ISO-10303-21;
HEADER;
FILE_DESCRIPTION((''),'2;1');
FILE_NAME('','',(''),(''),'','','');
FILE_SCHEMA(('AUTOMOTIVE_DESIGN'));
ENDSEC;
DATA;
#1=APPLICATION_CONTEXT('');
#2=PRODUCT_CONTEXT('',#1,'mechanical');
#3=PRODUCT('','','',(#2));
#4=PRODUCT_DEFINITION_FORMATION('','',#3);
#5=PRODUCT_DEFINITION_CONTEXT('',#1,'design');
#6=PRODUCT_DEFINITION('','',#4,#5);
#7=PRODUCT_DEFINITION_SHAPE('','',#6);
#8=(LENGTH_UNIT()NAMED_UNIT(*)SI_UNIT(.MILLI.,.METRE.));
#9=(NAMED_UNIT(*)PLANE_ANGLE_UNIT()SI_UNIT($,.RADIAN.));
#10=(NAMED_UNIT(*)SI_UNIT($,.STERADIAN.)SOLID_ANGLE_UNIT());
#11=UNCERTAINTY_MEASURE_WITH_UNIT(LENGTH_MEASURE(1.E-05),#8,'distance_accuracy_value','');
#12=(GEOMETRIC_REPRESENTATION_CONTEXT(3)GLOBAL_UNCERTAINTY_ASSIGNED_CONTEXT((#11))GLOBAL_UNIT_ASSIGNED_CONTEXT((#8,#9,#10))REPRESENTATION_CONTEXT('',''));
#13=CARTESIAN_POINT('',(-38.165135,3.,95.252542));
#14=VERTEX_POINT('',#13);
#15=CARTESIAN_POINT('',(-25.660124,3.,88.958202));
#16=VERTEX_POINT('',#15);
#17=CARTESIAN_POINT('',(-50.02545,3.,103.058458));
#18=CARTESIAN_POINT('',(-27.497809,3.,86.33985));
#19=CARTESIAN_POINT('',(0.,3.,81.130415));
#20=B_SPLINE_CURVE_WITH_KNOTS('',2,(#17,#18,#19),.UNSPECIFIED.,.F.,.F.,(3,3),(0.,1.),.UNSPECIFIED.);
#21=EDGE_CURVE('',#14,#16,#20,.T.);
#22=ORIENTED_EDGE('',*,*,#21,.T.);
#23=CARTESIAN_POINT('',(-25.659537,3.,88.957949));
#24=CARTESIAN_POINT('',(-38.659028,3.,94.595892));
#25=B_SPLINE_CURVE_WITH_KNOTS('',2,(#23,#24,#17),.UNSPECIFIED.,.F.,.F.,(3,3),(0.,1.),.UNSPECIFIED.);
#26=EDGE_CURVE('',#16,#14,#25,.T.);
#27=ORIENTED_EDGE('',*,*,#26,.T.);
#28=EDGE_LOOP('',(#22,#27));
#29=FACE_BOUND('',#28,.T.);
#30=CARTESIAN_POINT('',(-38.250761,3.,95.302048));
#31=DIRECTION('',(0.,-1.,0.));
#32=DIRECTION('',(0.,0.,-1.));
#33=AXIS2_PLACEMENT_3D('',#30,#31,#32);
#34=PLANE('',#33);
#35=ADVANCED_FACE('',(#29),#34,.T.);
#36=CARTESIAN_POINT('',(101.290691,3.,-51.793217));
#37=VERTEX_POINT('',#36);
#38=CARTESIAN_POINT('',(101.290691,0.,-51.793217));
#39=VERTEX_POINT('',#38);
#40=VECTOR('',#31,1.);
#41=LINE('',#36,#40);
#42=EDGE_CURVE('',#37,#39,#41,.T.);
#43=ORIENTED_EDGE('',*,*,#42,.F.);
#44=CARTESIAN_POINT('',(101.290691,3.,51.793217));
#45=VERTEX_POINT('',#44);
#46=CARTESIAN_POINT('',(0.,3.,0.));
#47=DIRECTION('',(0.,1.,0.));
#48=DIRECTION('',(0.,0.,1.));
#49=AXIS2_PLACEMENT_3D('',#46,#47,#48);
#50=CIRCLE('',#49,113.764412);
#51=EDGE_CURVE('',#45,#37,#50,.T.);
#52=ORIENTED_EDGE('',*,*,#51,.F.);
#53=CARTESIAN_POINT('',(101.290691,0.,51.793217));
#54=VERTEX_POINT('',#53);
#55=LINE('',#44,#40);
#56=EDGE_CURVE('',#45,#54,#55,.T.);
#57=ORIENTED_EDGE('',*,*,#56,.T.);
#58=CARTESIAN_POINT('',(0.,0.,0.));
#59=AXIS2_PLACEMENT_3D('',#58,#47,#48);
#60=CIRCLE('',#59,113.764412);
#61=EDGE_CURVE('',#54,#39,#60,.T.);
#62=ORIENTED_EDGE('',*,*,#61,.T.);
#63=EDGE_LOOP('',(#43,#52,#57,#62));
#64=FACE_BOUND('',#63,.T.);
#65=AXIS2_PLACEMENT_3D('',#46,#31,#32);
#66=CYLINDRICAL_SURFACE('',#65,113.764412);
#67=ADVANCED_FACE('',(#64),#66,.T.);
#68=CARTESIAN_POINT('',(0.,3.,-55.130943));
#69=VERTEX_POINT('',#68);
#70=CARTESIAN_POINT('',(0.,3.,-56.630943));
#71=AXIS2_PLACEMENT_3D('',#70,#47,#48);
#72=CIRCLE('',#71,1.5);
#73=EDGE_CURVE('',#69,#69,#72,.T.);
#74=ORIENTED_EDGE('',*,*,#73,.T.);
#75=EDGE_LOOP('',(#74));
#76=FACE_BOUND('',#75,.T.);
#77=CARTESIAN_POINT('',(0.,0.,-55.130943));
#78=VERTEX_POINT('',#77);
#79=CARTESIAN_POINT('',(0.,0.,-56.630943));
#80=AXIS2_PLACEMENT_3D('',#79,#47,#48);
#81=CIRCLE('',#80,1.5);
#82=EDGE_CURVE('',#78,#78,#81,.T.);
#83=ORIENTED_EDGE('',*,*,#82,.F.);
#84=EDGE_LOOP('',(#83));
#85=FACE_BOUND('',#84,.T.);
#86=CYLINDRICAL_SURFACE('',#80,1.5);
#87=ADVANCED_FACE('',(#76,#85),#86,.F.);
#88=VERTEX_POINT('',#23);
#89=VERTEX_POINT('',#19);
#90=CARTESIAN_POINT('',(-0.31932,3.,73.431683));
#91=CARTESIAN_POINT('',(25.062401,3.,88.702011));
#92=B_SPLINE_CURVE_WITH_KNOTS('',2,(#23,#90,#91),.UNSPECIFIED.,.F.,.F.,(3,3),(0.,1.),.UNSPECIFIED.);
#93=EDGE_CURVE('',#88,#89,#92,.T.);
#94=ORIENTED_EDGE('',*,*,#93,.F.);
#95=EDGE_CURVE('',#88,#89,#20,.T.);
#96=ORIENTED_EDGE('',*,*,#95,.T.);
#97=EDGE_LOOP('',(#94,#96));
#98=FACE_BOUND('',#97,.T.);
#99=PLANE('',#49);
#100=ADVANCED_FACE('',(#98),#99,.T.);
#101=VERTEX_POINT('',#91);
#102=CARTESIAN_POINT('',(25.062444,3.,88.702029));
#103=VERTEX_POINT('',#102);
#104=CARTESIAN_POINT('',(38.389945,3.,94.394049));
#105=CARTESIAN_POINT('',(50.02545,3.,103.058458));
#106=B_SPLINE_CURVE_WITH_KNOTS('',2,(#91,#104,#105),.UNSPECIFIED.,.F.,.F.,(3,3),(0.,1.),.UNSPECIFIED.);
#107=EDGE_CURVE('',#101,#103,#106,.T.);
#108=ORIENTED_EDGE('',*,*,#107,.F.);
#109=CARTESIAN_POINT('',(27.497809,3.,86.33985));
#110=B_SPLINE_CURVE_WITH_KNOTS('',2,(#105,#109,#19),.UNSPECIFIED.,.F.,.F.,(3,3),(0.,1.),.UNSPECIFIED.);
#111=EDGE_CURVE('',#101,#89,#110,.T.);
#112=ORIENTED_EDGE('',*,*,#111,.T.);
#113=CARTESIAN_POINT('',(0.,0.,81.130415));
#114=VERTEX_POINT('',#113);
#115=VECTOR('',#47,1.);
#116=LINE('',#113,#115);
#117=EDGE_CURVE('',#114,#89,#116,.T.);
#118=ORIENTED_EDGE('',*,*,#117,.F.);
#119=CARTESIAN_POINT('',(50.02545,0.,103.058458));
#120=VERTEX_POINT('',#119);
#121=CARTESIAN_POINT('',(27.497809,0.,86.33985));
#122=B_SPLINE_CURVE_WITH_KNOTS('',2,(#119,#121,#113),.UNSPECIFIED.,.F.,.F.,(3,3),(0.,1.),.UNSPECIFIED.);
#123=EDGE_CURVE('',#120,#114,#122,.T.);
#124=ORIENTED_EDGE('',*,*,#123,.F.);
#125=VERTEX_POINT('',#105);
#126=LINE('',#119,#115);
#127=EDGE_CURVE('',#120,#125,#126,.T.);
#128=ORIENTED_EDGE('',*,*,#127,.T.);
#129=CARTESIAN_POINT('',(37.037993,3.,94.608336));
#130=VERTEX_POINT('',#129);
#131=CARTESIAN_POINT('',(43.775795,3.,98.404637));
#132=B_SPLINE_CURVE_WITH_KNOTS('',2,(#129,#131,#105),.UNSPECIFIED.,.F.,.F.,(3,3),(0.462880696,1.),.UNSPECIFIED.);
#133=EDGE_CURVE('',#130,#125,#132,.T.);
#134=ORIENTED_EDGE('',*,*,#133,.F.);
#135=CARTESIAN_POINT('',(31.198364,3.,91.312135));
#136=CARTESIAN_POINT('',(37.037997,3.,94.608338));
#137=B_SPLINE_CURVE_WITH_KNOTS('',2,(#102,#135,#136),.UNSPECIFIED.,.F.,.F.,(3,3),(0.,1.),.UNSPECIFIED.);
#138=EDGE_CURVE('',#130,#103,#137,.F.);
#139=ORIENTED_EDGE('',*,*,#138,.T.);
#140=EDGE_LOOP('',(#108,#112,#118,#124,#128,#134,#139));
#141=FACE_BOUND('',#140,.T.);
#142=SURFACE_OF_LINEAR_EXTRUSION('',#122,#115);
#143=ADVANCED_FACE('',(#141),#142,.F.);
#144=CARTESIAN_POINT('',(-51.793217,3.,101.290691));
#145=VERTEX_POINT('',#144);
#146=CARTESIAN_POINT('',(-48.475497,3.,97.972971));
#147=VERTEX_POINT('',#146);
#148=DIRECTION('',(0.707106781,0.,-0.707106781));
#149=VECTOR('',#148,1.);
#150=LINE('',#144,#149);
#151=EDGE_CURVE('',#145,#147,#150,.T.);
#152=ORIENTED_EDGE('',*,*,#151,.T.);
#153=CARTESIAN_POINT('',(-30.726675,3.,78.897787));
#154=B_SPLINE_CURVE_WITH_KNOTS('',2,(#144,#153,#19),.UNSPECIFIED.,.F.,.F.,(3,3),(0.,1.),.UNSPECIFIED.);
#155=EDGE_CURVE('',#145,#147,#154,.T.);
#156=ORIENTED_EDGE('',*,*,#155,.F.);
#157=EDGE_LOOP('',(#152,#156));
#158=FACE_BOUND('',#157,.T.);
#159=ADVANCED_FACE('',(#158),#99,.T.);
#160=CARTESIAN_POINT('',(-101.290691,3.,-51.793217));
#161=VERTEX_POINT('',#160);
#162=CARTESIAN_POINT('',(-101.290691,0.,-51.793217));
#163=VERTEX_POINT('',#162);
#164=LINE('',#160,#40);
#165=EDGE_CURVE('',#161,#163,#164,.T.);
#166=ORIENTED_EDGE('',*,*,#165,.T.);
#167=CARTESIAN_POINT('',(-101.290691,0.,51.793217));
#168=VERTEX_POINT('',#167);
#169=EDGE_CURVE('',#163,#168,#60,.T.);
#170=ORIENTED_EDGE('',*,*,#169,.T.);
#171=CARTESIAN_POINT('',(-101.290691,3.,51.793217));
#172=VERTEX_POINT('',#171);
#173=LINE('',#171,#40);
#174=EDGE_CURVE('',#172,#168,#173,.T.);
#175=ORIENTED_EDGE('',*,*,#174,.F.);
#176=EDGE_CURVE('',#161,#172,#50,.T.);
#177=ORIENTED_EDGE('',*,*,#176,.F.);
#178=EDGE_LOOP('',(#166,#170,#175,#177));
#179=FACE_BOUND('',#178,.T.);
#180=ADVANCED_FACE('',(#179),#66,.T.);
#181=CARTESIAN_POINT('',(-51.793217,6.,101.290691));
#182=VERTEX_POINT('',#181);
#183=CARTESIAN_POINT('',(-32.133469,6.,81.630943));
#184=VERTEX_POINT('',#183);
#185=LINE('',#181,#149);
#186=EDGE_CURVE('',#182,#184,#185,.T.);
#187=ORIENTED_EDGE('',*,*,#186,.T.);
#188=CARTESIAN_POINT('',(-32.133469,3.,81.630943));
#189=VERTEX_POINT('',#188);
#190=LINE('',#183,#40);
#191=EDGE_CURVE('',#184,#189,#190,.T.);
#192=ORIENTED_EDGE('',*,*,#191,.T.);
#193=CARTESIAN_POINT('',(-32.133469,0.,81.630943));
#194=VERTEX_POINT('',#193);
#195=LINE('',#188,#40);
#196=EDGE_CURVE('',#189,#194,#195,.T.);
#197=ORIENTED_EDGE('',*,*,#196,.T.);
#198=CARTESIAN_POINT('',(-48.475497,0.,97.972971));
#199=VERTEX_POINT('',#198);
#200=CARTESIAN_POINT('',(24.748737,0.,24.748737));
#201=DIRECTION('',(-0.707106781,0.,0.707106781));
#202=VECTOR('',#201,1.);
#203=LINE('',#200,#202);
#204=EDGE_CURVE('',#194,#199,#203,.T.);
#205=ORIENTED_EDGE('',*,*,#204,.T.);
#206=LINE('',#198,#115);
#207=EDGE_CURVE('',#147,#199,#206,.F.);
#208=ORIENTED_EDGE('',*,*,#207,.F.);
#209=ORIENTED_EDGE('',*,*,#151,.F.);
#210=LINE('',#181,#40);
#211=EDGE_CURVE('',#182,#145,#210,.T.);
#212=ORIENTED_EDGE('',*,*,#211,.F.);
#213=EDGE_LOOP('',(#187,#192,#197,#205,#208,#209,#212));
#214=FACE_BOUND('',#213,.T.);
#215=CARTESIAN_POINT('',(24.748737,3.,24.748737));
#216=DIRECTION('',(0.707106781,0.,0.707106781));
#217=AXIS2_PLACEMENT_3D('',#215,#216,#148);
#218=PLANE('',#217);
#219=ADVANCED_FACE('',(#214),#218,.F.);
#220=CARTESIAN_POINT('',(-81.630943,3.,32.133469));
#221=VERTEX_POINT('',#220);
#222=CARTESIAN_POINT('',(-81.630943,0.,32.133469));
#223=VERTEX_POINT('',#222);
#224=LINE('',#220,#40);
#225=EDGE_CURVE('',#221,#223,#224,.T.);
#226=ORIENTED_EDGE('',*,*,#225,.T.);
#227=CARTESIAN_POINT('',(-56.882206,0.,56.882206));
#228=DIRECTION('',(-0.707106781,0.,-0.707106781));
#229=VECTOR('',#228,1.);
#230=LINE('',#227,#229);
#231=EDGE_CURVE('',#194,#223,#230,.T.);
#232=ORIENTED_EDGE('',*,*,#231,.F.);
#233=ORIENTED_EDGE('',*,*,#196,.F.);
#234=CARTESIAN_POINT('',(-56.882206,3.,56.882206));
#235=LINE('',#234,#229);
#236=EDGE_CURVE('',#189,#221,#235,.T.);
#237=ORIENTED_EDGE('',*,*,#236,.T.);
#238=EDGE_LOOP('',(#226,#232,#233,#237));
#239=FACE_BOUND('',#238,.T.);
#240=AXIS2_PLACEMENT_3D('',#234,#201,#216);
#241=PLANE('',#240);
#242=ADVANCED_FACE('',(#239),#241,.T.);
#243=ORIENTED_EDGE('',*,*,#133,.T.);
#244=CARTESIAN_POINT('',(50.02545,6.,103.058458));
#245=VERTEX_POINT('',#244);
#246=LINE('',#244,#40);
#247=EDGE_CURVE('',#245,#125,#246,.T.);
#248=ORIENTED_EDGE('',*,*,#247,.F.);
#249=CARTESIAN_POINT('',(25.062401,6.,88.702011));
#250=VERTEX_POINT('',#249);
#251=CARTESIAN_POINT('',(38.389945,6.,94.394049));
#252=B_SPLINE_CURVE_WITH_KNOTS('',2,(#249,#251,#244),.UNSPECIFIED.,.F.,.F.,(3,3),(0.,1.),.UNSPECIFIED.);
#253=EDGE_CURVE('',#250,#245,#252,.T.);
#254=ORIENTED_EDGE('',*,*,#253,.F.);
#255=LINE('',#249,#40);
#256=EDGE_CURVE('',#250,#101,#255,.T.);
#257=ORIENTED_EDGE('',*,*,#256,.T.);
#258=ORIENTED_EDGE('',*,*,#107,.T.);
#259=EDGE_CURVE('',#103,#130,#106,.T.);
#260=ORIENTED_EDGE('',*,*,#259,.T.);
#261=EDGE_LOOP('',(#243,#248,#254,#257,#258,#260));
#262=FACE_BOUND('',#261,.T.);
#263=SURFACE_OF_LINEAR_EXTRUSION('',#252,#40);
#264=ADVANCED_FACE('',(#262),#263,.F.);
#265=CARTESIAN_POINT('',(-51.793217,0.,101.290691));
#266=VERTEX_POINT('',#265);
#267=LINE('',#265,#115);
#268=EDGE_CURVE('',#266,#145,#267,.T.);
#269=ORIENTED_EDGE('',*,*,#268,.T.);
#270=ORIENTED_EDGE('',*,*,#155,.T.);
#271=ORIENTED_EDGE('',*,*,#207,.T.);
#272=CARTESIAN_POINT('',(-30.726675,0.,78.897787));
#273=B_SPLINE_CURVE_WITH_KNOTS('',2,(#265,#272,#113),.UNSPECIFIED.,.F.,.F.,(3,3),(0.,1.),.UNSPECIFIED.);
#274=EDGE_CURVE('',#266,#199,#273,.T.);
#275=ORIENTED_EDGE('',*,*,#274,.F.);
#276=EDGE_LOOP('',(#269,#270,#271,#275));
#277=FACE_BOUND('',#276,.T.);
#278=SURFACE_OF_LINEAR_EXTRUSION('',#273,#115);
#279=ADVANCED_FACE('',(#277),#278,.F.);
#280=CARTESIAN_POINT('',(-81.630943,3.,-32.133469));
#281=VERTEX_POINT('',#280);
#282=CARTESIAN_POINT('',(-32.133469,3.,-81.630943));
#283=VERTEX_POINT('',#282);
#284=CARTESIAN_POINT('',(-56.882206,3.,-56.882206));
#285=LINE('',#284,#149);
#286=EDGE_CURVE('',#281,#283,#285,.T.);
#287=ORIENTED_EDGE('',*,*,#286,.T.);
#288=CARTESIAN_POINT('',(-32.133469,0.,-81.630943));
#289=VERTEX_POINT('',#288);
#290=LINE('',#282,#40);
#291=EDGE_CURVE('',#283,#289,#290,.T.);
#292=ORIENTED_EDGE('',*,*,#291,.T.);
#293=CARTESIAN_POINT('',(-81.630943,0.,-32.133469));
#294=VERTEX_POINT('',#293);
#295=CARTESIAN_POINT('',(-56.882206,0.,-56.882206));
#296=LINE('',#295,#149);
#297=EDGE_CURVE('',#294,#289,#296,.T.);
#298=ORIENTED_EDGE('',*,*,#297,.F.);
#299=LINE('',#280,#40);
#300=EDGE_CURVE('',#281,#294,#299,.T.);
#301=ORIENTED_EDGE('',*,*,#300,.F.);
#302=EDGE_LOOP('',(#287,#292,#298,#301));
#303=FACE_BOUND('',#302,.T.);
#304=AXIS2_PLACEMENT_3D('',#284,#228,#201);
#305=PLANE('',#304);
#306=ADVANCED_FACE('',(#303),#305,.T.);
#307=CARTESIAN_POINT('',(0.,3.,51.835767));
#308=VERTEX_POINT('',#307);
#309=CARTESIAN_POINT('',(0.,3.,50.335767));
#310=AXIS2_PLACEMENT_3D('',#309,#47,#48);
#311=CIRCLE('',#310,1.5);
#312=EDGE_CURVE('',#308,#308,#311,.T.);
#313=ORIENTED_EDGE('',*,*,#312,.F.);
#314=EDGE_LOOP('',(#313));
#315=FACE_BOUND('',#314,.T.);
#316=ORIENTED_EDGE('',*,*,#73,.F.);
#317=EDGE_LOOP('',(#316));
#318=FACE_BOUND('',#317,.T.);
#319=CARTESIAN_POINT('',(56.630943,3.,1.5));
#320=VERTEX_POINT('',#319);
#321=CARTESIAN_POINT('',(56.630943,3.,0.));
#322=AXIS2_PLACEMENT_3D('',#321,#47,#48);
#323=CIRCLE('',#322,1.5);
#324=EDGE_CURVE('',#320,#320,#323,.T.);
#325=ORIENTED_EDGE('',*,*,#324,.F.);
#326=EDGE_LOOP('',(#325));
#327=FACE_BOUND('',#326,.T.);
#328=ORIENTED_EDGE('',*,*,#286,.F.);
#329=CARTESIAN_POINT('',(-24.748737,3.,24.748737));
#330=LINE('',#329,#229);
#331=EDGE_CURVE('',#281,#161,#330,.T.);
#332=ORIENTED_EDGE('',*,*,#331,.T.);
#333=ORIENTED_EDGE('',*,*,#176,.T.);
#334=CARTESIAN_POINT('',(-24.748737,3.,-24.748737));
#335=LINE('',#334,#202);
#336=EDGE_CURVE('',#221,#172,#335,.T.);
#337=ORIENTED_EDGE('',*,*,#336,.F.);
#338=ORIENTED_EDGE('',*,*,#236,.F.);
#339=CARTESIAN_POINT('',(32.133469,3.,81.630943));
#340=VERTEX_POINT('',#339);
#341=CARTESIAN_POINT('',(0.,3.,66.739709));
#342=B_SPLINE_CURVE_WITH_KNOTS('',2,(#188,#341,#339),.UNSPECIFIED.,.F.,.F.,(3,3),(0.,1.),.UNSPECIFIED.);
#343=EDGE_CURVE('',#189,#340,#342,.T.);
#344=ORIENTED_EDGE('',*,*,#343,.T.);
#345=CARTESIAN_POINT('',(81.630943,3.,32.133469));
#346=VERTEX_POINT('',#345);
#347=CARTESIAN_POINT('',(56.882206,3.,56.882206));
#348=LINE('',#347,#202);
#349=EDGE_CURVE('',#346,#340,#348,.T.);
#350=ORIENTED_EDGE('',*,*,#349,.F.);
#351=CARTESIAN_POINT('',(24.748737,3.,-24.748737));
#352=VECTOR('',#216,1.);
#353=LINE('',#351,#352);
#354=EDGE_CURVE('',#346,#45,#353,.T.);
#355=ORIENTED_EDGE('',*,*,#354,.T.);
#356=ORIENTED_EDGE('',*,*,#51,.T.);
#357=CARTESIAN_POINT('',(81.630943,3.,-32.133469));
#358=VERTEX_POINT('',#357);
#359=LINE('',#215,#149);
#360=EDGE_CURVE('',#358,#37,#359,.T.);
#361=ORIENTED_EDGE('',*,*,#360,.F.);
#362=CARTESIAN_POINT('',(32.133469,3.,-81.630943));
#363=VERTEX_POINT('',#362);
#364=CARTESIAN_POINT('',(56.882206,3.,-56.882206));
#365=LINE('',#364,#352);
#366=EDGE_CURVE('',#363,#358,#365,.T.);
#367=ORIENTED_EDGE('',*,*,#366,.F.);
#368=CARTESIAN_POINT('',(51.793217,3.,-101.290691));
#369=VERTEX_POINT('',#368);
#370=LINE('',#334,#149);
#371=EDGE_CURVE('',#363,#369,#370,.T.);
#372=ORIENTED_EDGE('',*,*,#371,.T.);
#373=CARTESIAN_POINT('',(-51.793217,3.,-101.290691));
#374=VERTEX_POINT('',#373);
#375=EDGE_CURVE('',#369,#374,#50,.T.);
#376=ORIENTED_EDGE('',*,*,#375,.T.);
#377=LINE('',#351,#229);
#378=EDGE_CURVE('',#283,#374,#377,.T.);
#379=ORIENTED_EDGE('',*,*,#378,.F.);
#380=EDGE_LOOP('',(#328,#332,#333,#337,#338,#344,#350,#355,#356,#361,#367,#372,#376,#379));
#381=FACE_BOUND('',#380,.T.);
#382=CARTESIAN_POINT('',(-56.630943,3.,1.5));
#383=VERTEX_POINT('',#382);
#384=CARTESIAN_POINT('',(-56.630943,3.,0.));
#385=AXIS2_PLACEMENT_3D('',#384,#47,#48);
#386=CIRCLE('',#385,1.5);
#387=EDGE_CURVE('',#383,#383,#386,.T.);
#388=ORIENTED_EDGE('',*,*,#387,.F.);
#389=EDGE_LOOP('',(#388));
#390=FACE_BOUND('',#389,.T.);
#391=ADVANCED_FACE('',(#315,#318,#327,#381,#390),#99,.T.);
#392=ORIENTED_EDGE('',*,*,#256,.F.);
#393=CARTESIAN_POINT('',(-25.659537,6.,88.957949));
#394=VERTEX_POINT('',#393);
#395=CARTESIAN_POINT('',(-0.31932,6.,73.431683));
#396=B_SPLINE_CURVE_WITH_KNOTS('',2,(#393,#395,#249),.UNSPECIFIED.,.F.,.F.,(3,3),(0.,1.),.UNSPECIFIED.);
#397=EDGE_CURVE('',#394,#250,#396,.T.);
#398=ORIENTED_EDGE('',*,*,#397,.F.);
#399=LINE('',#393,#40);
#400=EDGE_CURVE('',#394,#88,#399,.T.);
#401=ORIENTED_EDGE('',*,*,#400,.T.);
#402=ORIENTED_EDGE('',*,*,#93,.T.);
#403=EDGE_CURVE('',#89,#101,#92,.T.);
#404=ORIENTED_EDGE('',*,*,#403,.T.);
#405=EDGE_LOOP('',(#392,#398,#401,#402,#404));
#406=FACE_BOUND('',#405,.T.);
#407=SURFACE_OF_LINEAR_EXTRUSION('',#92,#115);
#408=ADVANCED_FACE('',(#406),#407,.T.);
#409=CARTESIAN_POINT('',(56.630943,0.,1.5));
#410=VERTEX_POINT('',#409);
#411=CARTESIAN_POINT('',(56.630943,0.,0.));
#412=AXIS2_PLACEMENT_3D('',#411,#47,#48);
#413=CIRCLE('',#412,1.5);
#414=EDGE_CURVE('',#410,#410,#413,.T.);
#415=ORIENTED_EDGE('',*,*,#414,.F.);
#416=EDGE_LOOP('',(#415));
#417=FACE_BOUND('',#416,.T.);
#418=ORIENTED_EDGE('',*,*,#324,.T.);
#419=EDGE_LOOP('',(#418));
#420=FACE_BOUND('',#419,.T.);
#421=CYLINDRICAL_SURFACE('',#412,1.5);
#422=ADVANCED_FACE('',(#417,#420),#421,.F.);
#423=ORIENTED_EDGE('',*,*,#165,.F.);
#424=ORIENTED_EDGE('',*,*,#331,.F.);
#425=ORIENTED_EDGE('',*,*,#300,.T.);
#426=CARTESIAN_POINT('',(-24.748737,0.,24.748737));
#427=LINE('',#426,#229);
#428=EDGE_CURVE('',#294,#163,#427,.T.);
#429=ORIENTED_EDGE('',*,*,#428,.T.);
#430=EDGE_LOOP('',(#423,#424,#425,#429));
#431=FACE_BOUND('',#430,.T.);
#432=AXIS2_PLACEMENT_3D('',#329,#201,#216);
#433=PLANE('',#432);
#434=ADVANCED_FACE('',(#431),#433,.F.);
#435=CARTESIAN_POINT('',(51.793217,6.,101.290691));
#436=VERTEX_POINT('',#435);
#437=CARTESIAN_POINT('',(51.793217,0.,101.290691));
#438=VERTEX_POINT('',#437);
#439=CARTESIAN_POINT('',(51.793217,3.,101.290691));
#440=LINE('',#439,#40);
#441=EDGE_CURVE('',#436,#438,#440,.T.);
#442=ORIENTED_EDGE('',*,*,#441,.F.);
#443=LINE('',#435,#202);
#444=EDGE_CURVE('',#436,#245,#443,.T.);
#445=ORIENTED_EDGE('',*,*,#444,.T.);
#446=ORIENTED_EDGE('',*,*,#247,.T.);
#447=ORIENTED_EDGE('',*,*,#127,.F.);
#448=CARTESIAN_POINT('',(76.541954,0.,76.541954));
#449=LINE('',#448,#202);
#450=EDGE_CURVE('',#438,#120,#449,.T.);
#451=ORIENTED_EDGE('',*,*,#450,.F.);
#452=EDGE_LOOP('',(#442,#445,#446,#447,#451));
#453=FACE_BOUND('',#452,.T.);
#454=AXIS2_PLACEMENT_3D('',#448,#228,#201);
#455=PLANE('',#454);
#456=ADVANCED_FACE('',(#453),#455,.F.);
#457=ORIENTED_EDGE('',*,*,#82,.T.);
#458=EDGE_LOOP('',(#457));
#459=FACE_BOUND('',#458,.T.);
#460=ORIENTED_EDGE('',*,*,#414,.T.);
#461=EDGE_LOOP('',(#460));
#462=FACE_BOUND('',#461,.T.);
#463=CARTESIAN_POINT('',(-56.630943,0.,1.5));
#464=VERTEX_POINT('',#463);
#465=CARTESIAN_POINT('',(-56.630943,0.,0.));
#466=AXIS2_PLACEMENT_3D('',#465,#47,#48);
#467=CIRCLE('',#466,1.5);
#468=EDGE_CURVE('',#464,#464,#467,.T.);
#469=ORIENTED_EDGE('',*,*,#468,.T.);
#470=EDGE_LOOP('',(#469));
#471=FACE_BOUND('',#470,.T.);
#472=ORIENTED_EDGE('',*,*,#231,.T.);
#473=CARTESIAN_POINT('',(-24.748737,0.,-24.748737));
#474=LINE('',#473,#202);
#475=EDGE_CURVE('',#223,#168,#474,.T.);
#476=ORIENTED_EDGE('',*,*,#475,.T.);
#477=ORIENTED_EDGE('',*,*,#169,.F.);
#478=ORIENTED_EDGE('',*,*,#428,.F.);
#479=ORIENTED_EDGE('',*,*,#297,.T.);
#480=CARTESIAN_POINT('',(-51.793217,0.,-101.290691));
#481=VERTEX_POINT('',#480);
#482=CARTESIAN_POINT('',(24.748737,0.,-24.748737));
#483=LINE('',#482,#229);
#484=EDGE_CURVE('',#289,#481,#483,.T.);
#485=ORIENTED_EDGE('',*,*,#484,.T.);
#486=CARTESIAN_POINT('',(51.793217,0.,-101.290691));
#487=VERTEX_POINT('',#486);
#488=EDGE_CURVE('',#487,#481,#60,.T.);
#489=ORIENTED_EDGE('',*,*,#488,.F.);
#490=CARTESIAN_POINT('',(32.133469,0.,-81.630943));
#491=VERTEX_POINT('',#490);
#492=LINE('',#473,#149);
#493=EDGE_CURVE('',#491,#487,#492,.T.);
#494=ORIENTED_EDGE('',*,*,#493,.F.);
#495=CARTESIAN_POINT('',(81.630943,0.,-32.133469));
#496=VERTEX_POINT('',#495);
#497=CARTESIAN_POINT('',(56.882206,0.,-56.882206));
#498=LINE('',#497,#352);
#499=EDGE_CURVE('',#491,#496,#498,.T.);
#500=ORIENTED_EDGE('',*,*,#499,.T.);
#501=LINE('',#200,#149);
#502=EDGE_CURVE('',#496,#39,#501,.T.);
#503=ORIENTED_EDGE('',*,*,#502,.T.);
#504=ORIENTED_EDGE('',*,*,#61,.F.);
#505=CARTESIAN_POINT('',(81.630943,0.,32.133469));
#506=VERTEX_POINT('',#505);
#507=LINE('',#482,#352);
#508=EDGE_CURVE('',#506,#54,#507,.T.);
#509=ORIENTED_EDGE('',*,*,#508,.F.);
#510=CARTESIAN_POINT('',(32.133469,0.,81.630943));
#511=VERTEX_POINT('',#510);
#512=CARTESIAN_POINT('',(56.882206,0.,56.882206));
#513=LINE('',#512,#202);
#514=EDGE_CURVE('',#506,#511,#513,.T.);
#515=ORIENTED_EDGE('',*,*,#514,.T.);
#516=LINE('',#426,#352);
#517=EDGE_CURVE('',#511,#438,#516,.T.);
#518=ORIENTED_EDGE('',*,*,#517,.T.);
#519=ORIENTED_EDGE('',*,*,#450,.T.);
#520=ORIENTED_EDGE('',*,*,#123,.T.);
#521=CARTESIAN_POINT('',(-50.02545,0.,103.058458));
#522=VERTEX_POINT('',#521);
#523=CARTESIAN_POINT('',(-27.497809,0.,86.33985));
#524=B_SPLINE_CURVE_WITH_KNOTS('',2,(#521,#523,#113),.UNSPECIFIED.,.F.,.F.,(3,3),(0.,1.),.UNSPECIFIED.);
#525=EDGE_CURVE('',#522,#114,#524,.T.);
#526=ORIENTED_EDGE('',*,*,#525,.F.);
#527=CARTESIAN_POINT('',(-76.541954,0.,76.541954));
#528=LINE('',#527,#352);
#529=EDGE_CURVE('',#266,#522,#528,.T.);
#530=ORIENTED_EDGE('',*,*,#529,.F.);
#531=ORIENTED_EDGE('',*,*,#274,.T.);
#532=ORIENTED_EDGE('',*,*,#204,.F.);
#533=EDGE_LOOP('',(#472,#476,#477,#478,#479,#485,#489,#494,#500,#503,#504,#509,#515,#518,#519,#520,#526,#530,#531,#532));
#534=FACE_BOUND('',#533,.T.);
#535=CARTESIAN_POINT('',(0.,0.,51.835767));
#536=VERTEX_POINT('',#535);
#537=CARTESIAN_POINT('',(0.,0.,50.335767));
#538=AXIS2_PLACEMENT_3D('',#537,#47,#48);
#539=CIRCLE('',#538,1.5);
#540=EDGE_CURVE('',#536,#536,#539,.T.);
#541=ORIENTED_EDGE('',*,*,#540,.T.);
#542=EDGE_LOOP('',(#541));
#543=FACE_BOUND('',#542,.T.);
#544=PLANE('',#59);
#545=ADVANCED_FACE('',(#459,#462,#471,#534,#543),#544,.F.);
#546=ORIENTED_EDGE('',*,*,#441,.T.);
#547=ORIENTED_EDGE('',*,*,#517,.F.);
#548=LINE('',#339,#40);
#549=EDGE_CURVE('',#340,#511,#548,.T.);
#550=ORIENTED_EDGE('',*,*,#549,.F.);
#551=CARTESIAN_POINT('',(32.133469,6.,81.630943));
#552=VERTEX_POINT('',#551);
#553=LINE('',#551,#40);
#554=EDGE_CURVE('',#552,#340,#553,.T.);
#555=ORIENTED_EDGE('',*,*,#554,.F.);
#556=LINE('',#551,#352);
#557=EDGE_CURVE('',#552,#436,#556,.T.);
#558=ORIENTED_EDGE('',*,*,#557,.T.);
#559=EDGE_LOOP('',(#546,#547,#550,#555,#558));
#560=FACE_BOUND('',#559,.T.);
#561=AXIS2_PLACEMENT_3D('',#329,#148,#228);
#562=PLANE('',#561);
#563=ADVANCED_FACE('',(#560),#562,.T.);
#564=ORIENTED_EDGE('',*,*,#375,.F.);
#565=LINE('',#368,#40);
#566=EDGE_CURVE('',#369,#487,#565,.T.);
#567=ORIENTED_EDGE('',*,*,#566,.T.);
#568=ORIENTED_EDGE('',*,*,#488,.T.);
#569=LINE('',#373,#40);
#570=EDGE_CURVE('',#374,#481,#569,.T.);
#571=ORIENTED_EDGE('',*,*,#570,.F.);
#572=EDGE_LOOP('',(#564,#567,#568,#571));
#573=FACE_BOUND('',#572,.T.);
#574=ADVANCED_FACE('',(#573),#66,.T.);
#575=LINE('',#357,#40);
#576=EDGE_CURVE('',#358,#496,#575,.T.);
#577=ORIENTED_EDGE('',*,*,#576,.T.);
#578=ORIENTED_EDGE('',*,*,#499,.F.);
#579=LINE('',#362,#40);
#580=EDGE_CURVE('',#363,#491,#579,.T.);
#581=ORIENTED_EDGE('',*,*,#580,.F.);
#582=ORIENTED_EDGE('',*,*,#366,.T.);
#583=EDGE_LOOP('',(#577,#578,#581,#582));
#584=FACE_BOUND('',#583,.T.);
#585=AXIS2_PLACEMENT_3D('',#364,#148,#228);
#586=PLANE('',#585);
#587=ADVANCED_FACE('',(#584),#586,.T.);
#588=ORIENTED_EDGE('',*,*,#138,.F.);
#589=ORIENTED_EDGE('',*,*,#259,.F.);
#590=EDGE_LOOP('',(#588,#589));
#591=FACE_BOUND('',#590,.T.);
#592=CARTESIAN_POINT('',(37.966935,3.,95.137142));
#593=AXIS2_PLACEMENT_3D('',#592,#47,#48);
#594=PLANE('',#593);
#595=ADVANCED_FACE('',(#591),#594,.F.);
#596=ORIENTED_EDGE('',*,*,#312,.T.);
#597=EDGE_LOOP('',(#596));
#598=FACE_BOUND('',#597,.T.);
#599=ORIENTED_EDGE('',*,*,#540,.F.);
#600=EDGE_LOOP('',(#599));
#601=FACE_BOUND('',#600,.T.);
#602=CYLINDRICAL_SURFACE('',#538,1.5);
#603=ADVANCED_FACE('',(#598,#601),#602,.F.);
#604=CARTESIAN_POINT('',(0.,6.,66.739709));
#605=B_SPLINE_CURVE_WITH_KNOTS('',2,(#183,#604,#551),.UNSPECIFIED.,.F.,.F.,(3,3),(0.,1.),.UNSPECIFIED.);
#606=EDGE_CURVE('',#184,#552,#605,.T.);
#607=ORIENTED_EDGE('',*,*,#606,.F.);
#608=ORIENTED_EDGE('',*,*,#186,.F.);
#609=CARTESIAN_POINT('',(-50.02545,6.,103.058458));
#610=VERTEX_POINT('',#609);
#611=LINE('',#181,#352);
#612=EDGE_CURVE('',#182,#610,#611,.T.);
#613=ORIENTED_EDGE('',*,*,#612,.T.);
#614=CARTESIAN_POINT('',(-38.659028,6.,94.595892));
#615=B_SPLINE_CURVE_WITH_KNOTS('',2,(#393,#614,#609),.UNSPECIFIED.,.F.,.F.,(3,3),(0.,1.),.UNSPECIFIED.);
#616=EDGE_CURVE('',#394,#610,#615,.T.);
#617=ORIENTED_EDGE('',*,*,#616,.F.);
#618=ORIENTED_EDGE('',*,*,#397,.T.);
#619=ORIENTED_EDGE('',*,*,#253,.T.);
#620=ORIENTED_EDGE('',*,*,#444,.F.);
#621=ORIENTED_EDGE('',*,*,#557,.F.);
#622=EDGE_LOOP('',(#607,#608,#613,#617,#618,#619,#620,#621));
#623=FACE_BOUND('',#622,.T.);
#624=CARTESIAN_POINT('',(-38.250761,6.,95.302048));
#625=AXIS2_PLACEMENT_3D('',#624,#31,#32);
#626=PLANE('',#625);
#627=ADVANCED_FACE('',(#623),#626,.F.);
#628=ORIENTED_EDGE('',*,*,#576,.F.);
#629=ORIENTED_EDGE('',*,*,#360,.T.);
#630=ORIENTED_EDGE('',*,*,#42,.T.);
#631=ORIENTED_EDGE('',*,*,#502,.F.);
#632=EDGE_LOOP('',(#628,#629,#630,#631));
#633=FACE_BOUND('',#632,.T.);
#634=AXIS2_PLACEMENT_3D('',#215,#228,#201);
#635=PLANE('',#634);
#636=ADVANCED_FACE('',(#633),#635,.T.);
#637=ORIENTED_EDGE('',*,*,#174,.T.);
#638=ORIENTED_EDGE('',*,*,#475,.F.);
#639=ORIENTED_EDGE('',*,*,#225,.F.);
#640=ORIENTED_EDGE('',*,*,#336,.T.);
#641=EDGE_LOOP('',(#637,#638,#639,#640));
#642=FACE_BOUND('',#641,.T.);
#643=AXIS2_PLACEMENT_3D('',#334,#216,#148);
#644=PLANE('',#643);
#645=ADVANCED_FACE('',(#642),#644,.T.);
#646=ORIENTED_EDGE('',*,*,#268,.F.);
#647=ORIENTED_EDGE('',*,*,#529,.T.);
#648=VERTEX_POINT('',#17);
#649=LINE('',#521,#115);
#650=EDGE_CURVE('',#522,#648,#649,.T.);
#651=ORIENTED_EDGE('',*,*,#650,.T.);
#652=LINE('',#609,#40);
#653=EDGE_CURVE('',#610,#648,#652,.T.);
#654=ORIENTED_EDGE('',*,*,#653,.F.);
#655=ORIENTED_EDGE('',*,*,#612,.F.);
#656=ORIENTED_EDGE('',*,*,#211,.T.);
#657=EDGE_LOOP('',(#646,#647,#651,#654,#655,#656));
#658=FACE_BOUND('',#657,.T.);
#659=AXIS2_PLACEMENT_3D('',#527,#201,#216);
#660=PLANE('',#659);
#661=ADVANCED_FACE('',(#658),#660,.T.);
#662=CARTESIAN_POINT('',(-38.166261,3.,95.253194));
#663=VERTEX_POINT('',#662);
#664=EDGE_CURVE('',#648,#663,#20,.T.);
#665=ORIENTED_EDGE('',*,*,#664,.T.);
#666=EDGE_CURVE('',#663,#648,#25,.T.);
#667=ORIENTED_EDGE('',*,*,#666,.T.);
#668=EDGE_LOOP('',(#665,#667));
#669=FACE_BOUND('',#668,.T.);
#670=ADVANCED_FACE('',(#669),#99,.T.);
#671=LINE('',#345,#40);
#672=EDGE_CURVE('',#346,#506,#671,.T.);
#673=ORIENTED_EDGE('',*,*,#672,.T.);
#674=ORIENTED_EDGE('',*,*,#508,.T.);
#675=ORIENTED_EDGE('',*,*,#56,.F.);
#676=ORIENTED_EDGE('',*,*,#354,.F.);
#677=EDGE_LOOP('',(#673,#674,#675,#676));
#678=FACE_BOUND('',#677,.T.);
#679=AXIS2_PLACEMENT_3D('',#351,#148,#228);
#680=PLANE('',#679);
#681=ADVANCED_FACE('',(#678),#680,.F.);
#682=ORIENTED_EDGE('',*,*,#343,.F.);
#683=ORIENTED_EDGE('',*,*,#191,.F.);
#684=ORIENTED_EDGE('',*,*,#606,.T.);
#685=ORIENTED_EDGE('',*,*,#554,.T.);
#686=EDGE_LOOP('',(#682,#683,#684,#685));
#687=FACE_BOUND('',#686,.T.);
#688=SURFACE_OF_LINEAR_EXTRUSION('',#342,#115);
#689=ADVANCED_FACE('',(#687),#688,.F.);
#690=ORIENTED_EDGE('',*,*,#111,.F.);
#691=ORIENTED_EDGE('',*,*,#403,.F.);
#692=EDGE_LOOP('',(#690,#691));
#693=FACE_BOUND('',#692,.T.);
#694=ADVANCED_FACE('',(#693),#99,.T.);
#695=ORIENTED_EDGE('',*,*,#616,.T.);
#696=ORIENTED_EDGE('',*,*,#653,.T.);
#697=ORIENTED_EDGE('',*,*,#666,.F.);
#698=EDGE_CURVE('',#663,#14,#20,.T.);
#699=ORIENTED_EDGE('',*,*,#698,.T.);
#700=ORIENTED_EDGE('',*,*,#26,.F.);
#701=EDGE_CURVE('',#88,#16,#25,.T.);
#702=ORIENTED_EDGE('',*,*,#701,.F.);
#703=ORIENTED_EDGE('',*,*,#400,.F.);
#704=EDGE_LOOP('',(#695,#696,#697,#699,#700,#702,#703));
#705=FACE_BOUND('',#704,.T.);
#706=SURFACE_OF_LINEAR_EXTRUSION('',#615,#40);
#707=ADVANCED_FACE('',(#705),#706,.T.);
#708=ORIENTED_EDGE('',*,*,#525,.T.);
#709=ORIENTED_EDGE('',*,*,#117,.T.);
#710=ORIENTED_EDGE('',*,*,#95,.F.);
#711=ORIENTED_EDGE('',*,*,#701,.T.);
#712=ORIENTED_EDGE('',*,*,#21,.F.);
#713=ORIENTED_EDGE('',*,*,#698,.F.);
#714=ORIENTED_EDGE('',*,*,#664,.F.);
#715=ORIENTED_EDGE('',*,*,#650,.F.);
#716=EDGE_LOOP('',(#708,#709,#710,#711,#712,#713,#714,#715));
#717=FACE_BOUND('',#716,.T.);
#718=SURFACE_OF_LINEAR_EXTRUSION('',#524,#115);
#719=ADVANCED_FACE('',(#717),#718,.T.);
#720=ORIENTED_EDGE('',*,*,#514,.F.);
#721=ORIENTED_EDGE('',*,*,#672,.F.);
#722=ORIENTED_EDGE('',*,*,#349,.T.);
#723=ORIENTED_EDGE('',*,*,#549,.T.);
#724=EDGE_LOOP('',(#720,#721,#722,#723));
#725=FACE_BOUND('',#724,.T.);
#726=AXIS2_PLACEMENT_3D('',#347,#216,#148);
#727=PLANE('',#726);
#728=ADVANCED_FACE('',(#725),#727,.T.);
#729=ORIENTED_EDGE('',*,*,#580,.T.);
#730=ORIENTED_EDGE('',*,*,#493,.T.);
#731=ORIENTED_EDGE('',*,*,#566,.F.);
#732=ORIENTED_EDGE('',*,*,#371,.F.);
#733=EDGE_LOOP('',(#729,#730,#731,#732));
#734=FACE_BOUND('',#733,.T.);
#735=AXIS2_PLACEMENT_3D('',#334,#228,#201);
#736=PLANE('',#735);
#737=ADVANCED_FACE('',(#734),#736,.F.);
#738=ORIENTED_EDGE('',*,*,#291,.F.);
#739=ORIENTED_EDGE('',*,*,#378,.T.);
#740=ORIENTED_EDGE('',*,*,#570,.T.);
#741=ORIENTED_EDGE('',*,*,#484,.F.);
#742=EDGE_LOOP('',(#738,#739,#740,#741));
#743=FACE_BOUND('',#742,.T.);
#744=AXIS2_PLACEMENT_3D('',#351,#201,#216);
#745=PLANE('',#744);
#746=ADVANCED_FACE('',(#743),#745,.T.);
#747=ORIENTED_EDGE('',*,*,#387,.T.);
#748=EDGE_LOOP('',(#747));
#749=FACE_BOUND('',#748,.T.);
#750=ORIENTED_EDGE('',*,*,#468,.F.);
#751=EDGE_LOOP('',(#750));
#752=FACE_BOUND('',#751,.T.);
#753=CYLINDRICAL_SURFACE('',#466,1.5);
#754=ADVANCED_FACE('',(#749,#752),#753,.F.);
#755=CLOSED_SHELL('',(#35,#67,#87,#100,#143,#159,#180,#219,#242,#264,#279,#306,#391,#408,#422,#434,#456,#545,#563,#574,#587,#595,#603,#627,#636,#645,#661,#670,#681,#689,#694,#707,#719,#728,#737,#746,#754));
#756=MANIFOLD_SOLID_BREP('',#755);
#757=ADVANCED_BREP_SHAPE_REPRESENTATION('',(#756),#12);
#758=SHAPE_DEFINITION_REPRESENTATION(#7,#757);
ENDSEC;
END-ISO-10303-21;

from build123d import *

# Parameters (mm, degrees)
BOSS_EXTRUDE1_DEPTH  = 3
CUT_EXTRUDE2_START   = -3
CUT_EXTRUDE2_DEPTH   = 3
CUT_EXTRUDE3_DEPTH   = 3
BOSS_EXTRUDE22_START = -3
BOSS_EXTRUDE22_DEPTH = 3
BOSS_EXTRUDE23_DEPTH = 3
BOSS_EXTRUDE25_DEPTH = 3
SKETCH9_R            = 1.5
CUT_EXTRUDE7_DEPTH   = 3


# Read off the part's stored shape, not the designer's step: Boss-Extrude22
with BuildPart() as part:
    # Sketch1 → Boss-Extrude1 (new body)
    with BuildSketch(Plane(origin=(0, 0, 0), x_dir=(1, 0, 0), z_dir=(0, 1, 0))):
        with BuildLine():
            Line((-101.290691251, -51.793216568), (-81.630943295, -32.133468612))
            Line((-81.630943295, -32.133468612), (-113.764411907, 0))
            ThreePointArc((-113.764411907, 0), (-110.602028323, -26.637055906), (-101.290691251, -51.793216568))
        make_face()
        with BuildLine():
            ThreePointArc((-101.290691251, 51.793216568), (-110.602028323, 26.637055906), (-113.764411907, 0))
            Line((-113.764411907, 0), (-81.630943295, 32.133468612))
            Line((-81.630943295, 32.133468612), (-101.290691251, 51.793216568))
        make_face()
        with BuildLine():
            Line((-51.793216568, 101.290691251), (-32.133468612, 81.630943295))
            Line((-32.133468612, 81.630943295), (0, 113.764411907))
            ThreePointArc((0, 113.764411907), (-26.637055906, 110.602028323), (-51.793216568, 101.290691251))
        make_face()
        with BuildLine():
            Line((0, 113.764411907), (32.133468612, 81.630943295))
            Line((32.133468612, 81.630943295), (51.793216568, 101.290691251))
            ThreePointArc((51.793216568, 101.290691251), (26.637055906, 110.602028323), (0, 113.764411907))
        make_face()
        with BuildLine():
            Line((101.290691251, 51.793216568), (81.630943295, 32.133468612))
            Line((81.630943295, 32.133468612), (113.764411907, 0))
            ThreePointArc((113.764411907, 0), (110.602028323, 26.637055906), (101.290691251, 51.793216568))
        make_face()
        with BuildLine():
            Line((113.764411907, 0), (81.630943295, -32.133468612))
            Line((81.630943295, -32.133468612), (101.290691251, -51.793216568))
            ThreePointArc((101.290691251, -51.793216568), (110.602028323, -26.637055906), (113.764411907, 0))
        make_face()
        with BuildLine():
            Line((32.133468612, -81.630943295), (0, -113.764411907))
            ThreePointArc((0, -113.764411907), (26.637055906, -110.602028323), (51.793216568, -101.290691251))
            Line((51.793216568, -101.290691251), (32.133468612, -81.630943295))
        make_face()
        Polygon((0, 49.497474683), (-49.497474683, 0), (0, -49.497474683), (49.497474683, 0), align=None)
        Polygon((-81.630943295, -32.133468612), (-56.882205953, -56.882205953), (-32.133468612, -81.630943295), (0, -49.497474683), (-49.497474683, 0), align=None)
        Polygon((-113.764411907, 0), (-81.630943295, -32.133468612), (-49.497474683, 0), (-81.630943295, 32.133468612), align=None)
        Polygon((-32.133468612, 81.630943295), (0, 49.497474683), (32.133468612, 81.630943295), (0, 113.764411907), align=None)
        Polygon((-81.630943295, 32.133468612), (-49.497474683, 0), (0, 49.497474683), (-32.133468612, 81.630943295), align=None)
        Polygon((32.133468612, 81.630943295), (0, 49.497474683), (49.497474683, 0), (81.630943295, 32.133468612), (56.882205953, 56.882205953), align=None)
        Polygon((49.497474683, 0), (0, -49.497474683), (32.133468612, -81.630943295), (56.882205953, -56.882205953), (81.630943295, -32.133468612), align=None)
        Polygon((0, -49.497474683), (-32.133468612, -81.630943295), (0, -113.764411907), (32.133468612, -81.630943295), align=None)
        with BuildLine():
            Line((0, -113.764411907), (-32.133468612, -81.630943295))
            Line((-32.133468612, -81.630943295), (-51.793216568, -101.290691251))
            ThreePointArc((-51.793216568, -101.290691251), (-26.637055906, -110.602028323), (0, -113.764411907))
        make_face()
        Polygon((81.630943295, 32.133468612), (49.497474683, 0), (81.630943295, -32.133468612), (113.764411907, 0), align=None)
    extrude(amount=BOSS_EXTRUDE1_DEPTH)

    # Sketch2 → Cut-Extrude2 (cut)
    with BuildSketch(Plane(origin=(0, 3, 0), x_dir=(1, 0, 0), z_dir=(0, 1, 0)).offset(CUT_EXTRUDE2_START)):
        with BuildLine():
            Line((51.793216568, -101.290691251), (78.845781166, -111.980028466))
            Line((78.845781166, -111.980028466), (0, -134.894819764))
            Line((0, -134.894819764), (-52.523649098, -101.502975393))
            Line((-52.523649098, -101.502975393), (-51.793216568, -101.290691251))
            ThreePointArc((-51.793216568, -101.290691251), (0, -113.764411907), (51.793216568, -101.290691251))
        make_face()
        with BuildLine():
            ThreePointArc((-51.793216568, -101.290691251), (-26.637055906, -110.602028323), (0, -113.764411907))
            Line((0, -113.764411907), (0, -93.764411907))
            add(Edge.make_bspline(
                [(-51.793216568, -101.290691251), (-34.528811045, -96.273171688), (-17.264405523, -93.764411907), (0, -93.764411907)],
                knots=[0, 0, 0, 0, 0.5, 0.5, 0.5, 0.5], degree=3))
        make_face()
        with BuildLine():
            Line((0, -93.764411907), (0, -113.764411907))
            ThreePointArc((0, -113.764411907), (26.637055906, -110.602028323), (51.793216568, -101.290691251))
            add(Edge.make_bspline(
                [(0, -93.764411907), (17.264405523, -93.764411907), (34.528811045, -96.273171688), (51.793216568, -101.290691251)],
                knots=[0.5, 0.5, 0.5, 0.5, 1, 1, 1, 1], degree=3))
        make_face()
    extrude(amount=CUT_EXTRUDE2_DEPTH, mode=Mode.SUBTRACT)

    # Sketch3 → Cut-Extrude3 (cut)
    with BuildSketch(Plane(origin=(0, 3, 0), x_dir=(1, 0, 0), z_dir=(0, 1, 0))):
        with BuildLine():
            add(Edge.make_bspline(
                [(-51.793216568, -101.290691251), (-25.896608284, -81.13041494), (0, -81.13041494)],
                knots=[0, 0, 0, 0.5, 0.5, 0.5], degree=2))
            add(Edge.make_bspline(
                [(-51.793216568, -101.290691251), (-34.528811045, -96.273171688), (-17.264405523, -93.764411907), (0, -93.764411907)],
                knots=[0, 0, 0, 0, 0.5, 0.5, 0.5, 0.5], degree=3))
            Line((0, -93.764411907), (0, -81.13041494))
        make_face()
        with BuildLine():
            add(Edge.make_bspline(
                [(0, -81.13041494), (25.896608284, -81.13041494), (51.793216568, -101.290691251)],
                knots=[0.5, 0.5, 0.5, 1, 1, 1], degree=2))
            Line((0, -81.13041494), (0, -93.764411907))
            add(Edge.make_bspline(
                [(0, -93.764411907), (17.264405523, -93.764411907), (34.528811045, -96.273171688), (51.793216568, -101.290691251)],
                knots=[0.5, 0.5, 0.5, 0.5, 1, 1, 1, 1], degree=3))
        make_face()
        with BuildLine():
            add(Edge.make_bspline(
                [(-51.793216568, -101.290691251), (-34.528811045, -96.273171688), (-17.264405523, -93.764411907), (0, -93.764411907)],
                knots=[0, 0, 0, 0, 0.5, 0.5, 0.5, 0.5], degree=3))
            Line((-51.793216568, -101.290691251), (0, -101.290691251))
            Line((0, -101.290691251), (0, -93.764411907))
        make_face()
        with BuildLine():
            Line((0, -93.764411907), (0, -101.290691251))
            Line((0, -101.290691251), (51.793216568, -101.290691251))
            add(Edge.make_bspline(
                [(0, -93.764411907), (17.264405523, -93.764411907), (34.528811045, -96.273171688), (51.793216568, -101.290691251)],
                knots=[0.5, 0.5, 0.5, 0.5, 1, 1, 1, 1], degree=3))
        make_face()
    extrude(amount=-CUT_EXTRUDE3_DEPTH, mode=Mode.SUBTRACT)

    # Boss-Extrude22 outline → Boss-Extrude22 (add)
    with BuildSketch(Plane(origin=(0, 3, 0), x_dir=(1, 0, 0), z_dir=(0, 1, 0)).offset(BOSS_EXTRUDE22_START)):
        with BuildLine():
            add(Edge.make_bspline(
                [(-51.793216568, -101.290691251), (-25.896608283, -81.130414939), (2e-09, -81.13041494)],
                knots=[0, 0, 0, 0.5, 0.5, 0.5], degree=2))
            Line((-51.793216568, -101.290691251), (-50.025449615, -103.058458204))
            add(Edge.make_bspline(
                [(-50.025449615, -103.058458204), (-27.497808858, -86.339849844), (2e-09, -81.13041494)],
                knots=[0, 0, 0, 1, 1, 1], degree=2))
        make_face()
        with BuildLine():
            add(Edge.make_bspline(
                [(2e-09, -81.13041494), (25.896608285, -81.130414941), (51.793216568, -101.290691251)],
                knots=[0.5, 0.5, 0.5, 1, 1, 1], degree=2))
            add(Edge.make_bspline(
                [(50.025449615, -103.058458204), (27.49780886, -86.339849846), (2e-09, -81.13041494)],
                knots=[0, 0, 0, 1, 1, 1], degree=2))
            Line((50.025449615, -103.058458204), (51.793216568, -101.290691251))
        make_face()
        with BuildLine():
            add(Edge.make_bspline(
                [(-51.793216568, -101.290691251), (-50.163270872, -99.558123101), (-48.475496542, -97.972971225)],
                knots=[0, 0, 0, 0.0773713, 0.0773713, 0.0773713], degree=2))
            Line((-51.793216568, -101.290691251), (-48.475496542, -97.972971225))
        make_face()
    extrude(amount=BOSS_EXTRUDE22_DEPTH)

    # Sketch7 → Boss-Extrude23 (add)
    with BuildSketch(Plane(origin=(0, 3, 0), x_dir=(1, 0, 0), z_dir=(0, 1, 0))):
        with BuildLine():
            Line((-51.793216568, -101.290691251), (-32.133468612, -81.630943295))
            Line((-32.133468612, -81.630943295), (-25.659536996, -88.957948864))
            add(Edge.make_bspline(
                [(-25.659536996, -88.957948864), (-38.659028178, -94.595891725), (-50.025449615, -103.058458204)],
                knots=[0, 0, 0, 1, 1, 1], degree=2))
            Line((-50.025449615, -103.058458204), (-51.793216568, -101.290691251))
        make_face()
        with BuildLine():
            Line((32.133468612, -81.630943295), (25.062400804, -88.702011103))
            add(Edge.make_bspline(
                [(25.062400804, -88.702011103), (38.389944956, -94.394049191), (50.025449615, -103.058458204)],
                knots=[0, 0, 0, 1, 1, 1], degree=2))
            Line((50.025449615, -103.058458204), (51.793216568, -101.290691251))
            Line((51.793216568, -101.290691251), (32.133468612, -81.630943295))
        make_face()
    extrude(amount=BOSS_EXTRUDE23_DEPTH)

    # Sketch8 → Boss-Extrude25 (add)
    with BuildSketch(Plane(origin=(0, 6, 0), x_dir=(1, 0, 0), z_dir=(0, 1, 0))):
        with BuildLine():
            add(Edge.make_bspline(
                [(-25.659536996, -88.957948864), (-0.319320436, -73.431682627), (25.062400804, -88.702011103)],
                knots=[0, 0, 0, 1, 1, 1], degree=2))
            Line((25.062400804, -88.702011103), (32.133468612, -81.630943295))
            add(Edge.make_bspline(
                [(-32.133468612, -81.630943295), (0, -66.739709001), (32.133468612, -81.630943295)],
                knots=[0, 0, 0, 1, 1, 1], degree=2))
            Line((-32.133468612, -81.630943295), (-25.659536996, -88.957948864))
        make_face()
    extrude(amount=-BOSS_EXTRUDE25_DEPTH)

    # Sketch9 → Cut-Extrude7 (cut)
    with BuildSketch(Plane(origin=(0, 3, 0), x_dir=(1, 0, 0), z_dir=(0, 1, 0))):
        with Locations(Location((0, -50.335766678, 0), (0, 0, 270))):
            Circle(SKETCH9_R)
        with Locations(Location((-56.630943295, 0, 0), (0, 0, 270))):
            Circle(SKETCH9_R)
        with Locations(Location((0, 56.630943295, 0), (0, 0, 270))):
            Circle(SKETCH9_R)
        with Locations(Location((56.630943295, 0, 0), (0, 0, 270))):
            Circle(SKETCH9_R)
    extrude(amount=-CUT_EXTRUDE7_DEPTH, mode=Mode.SUBTRACT)


solid = part.part
